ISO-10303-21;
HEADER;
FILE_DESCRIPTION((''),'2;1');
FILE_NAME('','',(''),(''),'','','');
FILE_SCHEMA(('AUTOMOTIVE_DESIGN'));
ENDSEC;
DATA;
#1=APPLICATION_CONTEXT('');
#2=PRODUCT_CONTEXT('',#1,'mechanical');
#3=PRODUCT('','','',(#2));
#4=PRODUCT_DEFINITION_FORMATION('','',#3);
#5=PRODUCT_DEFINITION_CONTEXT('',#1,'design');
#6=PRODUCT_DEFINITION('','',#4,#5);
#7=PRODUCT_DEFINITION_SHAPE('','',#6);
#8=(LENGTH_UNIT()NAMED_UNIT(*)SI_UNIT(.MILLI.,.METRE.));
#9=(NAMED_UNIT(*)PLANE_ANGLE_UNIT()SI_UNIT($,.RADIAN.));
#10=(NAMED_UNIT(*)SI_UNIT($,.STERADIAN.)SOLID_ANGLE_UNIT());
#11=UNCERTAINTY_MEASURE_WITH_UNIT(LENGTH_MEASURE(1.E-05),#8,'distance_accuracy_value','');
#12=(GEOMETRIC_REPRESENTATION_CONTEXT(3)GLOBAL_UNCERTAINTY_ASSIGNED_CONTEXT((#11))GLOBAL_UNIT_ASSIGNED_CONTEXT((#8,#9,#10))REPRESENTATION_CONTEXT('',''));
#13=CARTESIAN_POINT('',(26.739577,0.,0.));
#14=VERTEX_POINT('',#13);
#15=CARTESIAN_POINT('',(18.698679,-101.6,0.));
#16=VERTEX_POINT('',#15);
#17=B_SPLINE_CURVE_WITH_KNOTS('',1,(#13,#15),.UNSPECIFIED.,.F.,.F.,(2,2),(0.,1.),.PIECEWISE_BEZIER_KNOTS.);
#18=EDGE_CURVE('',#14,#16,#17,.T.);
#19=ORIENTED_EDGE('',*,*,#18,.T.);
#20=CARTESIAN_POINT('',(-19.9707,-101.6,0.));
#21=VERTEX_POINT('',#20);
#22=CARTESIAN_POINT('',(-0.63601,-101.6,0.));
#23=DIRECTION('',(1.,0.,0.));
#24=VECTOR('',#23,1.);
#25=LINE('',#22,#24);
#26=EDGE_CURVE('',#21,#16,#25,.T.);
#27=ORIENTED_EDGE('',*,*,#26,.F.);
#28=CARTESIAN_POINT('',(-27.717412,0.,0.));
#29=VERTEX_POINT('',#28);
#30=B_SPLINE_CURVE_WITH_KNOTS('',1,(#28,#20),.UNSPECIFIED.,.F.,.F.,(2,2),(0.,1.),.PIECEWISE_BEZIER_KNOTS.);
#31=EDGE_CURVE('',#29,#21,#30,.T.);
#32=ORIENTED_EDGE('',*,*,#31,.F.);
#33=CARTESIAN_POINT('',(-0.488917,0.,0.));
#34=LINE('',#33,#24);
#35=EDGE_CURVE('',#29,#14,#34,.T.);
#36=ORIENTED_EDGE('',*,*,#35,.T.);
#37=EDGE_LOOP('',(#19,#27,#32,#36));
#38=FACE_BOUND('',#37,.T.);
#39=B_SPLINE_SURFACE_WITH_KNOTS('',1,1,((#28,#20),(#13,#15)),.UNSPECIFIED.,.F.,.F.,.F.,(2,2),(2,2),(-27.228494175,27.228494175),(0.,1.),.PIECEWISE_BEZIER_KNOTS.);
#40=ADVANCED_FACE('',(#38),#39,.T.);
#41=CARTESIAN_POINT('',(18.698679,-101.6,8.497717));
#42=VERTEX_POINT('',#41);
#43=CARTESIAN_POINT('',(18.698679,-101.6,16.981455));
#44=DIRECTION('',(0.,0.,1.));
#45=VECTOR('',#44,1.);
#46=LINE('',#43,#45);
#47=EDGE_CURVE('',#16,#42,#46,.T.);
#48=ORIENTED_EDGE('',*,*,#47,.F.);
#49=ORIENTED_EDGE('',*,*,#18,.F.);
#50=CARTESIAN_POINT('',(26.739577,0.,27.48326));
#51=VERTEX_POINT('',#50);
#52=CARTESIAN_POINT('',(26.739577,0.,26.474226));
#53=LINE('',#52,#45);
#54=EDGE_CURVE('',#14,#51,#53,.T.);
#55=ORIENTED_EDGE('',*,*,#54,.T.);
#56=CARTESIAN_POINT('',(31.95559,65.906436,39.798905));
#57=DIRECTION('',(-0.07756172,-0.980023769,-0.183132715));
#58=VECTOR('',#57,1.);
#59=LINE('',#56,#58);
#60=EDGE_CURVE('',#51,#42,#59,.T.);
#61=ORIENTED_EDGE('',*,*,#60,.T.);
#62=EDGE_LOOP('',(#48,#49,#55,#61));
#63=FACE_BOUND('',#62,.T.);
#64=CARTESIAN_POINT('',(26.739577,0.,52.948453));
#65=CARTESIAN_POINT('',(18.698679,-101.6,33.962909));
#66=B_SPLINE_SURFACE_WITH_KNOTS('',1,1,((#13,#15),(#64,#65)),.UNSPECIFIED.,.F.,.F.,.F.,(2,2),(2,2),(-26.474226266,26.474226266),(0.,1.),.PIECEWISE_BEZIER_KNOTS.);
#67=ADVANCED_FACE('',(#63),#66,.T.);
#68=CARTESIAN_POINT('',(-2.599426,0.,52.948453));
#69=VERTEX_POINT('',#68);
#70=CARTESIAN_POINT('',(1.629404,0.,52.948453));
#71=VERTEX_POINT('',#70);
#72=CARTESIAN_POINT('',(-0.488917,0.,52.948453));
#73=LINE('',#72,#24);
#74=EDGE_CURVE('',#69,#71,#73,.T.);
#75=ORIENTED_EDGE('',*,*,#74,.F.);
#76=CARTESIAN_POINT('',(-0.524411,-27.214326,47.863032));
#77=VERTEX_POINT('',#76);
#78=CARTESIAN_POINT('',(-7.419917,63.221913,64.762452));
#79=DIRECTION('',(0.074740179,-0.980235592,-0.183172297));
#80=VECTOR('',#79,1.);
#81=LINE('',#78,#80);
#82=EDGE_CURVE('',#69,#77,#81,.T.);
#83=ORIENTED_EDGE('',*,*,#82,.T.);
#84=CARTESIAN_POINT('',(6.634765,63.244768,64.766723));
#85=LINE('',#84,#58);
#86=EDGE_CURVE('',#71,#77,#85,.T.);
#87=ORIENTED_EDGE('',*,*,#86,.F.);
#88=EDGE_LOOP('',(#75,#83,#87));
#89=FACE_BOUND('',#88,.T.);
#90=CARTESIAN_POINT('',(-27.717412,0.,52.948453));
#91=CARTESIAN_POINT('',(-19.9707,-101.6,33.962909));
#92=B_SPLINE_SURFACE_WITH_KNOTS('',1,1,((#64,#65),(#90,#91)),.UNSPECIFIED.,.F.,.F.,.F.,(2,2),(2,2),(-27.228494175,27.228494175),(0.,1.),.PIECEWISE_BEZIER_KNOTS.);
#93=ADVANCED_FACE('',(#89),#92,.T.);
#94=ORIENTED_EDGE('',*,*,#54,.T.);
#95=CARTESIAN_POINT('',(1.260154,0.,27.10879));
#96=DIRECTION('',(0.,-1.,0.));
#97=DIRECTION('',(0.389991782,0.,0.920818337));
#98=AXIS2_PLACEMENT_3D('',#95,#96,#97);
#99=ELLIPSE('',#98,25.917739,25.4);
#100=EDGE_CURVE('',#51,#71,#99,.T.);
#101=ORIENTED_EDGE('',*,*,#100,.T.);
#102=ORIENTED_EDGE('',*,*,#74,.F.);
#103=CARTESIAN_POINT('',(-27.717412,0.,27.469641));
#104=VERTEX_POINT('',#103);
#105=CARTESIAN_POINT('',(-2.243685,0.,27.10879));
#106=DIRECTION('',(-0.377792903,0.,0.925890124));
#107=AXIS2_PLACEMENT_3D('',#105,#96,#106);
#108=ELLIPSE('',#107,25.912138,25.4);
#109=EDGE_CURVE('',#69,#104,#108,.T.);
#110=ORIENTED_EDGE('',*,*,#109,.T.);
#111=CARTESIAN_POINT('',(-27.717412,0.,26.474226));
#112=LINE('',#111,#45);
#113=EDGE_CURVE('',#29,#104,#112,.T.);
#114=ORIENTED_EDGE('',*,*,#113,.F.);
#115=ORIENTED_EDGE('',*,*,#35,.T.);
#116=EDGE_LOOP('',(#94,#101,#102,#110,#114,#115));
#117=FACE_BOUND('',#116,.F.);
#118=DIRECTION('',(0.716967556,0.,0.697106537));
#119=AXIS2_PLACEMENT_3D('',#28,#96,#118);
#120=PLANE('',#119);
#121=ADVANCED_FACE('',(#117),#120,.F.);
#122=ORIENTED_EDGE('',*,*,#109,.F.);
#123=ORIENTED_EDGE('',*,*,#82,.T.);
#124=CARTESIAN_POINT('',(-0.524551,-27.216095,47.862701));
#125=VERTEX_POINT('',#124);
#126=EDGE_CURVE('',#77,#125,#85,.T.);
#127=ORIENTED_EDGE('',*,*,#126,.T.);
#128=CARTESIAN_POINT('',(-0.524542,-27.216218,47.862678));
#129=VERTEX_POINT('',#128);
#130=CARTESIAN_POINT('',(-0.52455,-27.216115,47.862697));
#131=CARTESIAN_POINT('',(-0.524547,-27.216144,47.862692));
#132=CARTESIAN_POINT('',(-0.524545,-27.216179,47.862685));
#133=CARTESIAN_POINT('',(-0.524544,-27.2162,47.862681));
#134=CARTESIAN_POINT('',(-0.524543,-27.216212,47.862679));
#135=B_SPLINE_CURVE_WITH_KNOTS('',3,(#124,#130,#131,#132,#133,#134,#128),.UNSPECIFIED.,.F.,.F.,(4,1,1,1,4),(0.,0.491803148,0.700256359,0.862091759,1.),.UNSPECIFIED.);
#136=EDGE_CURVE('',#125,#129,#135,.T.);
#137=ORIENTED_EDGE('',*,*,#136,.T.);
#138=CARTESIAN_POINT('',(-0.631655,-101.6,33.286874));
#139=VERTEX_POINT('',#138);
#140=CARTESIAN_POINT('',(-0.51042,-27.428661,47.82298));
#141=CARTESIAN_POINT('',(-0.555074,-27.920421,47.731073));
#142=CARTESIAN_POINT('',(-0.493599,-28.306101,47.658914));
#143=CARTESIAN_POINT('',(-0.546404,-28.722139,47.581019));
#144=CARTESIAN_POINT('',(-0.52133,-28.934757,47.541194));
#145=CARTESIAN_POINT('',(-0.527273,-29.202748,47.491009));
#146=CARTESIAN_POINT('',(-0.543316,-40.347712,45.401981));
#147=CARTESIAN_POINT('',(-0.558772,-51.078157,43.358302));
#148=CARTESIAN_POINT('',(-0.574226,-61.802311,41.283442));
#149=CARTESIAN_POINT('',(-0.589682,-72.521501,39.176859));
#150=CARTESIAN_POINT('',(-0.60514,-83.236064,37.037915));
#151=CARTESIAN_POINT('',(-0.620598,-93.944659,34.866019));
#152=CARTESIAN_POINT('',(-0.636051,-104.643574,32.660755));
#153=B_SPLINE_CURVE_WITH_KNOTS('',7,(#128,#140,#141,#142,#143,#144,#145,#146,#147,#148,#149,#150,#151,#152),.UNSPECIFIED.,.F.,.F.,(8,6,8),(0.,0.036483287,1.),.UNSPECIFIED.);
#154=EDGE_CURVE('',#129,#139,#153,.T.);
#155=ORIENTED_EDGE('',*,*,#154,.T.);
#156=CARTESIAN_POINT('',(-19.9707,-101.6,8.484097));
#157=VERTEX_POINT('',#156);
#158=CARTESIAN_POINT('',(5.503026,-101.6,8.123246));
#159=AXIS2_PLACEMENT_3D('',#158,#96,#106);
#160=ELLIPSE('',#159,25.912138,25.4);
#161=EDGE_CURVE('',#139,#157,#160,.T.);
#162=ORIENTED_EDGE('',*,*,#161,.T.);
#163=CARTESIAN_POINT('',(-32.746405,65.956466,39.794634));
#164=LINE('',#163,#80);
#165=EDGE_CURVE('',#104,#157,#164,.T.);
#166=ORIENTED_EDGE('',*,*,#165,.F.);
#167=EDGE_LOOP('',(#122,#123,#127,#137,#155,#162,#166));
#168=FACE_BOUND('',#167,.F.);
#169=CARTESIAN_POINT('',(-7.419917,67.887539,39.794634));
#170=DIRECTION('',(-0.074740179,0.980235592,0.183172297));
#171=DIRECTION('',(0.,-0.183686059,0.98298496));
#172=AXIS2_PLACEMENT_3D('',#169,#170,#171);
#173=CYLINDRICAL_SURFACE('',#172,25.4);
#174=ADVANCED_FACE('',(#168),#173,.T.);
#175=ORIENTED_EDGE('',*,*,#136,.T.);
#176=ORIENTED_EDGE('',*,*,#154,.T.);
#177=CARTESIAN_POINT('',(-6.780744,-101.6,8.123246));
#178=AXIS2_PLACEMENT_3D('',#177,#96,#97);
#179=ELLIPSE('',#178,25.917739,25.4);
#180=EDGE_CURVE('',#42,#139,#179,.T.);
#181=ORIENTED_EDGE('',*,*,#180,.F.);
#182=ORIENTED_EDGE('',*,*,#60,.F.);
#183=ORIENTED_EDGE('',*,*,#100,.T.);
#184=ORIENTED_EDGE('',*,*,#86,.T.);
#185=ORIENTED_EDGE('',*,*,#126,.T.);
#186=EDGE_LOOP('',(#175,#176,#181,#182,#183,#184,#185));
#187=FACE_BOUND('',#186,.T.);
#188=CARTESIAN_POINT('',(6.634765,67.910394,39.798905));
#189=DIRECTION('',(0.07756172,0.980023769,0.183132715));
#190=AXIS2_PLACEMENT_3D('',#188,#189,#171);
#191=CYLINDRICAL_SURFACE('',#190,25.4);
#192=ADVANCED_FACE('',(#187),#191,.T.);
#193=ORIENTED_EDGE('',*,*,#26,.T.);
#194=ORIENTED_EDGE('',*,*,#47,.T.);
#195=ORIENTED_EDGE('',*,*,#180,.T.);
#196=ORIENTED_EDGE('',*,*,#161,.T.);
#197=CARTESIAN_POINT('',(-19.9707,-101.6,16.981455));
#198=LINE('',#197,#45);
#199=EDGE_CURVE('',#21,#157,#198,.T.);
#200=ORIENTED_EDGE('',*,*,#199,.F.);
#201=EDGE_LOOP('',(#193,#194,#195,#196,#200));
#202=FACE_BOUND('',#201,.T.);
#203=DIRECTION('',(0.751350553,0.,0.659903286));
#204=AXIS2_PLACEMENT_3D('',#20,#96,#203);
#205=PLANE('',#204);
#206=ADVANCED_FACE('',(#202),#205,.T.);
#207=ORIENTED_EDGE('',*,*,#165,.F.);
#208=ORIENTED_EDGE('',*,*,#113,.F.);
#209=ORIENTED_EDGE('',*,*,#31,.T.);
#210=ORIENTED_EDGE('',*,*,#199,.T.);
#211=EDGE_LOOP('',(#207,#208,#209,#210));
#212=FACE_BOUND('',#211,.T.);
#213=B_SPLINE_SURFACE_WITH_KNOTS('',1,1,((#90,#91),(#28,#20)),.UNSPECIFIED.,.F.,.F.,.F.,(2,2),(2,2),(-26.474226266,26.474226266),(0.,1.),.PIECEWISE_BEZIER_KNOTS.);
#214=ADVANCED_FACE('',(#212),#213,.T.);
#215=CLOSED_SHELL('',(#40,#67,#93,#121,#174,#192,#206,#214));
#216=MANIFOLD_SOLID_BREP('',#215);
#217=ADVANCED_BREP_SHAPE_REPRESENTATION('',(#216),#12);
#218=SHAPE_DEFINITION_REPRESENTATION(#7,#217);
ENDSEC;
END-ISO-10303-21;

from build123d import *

# Parameters (mm, degrees)
F0_W        = 54.4569883496
F0_H        = 52.9484525323
F2_W        = 38.669379428
F2_H        = 33.9629091322
F4_T1_DEPTH = 228.8872093308
F4_T3_DEPTH = 228.8436040844


# Not quite as in the source:
# - a fillet or chamfer that OpenCascade refuses, or shapes differently, is made with other operations: its cross-section is extruded or revolved along the edge and cut away or added


with BuildPart() as f3:
    # F0 (on Front) → F3 section 0
    with BuildSketch(Plane.XZ):
        with Locations((-0.4889173433, 26.4742262661)):
            Rectangle(F0_W, F0_H)
    # F2 (on offset) → F3 section 1
    with BuildSketch(Plane.XZ.offset(101.6)):
        with Locations((-0.6360104308, 16.9814545661)):
            Rectangle(F2_W, F2_H)
    loft()

    # F4: fillet of radius 25.4 on 2 edges, made by hand

    # F4_s2 → F4_t1 (cut)
    with BuildSketch(Plane(origin=(-5.5598937152, 72.9193556138, 13.6261180188), x_dir=(0.9971057986, 0.0760264846, 0), z_dir=(0.0747401792, -0.9802355917, -0.1831722969))):
        with BuildLine():
            ThreePointArc((-2.5919028833, 52.0164089613), (-20.3226785097, 44.4535478513), (-27.6371917475, 26.6188858536))
            Line((-27.6371917475, 26.6188858536), (-27.6371917475, 51.6666172583))
            Line((-27.6371917475, 51.6666172583), (-2.5919028833, 52.0164089613))
        make_face()
    extrude(amount=F4_T1_DEPTH, mode=Mode.SUBTRACT)

    # F4_s4 → F4_t3 (cut)
    with BuildSketch(Plane(origin=(5.7672479515, 72.8715156932, 13.6171783841), x_dir=(0.9968828528, -0.078895993, 0), z_dir=(-0.0775617197, -0.9800237693, -0.1831327146))):
        with BuildLine():
            ThreePointArc((1.6243248242, 52.0294565484), (19.3464124697, 44.4620185205), (26.6562256355, 26.6321239525))
            Line((26.6562256355, 26.6321239525), (26.6562256355, 51.6666537877))
            Line((26.6562256355, 51.6666537877), (1.6243248242, 52.0294565484))
        make_face()
    extrude(amount=F4_T3_DEPTH, mode=Mode.SUBTRACT)


solid = f3.part
